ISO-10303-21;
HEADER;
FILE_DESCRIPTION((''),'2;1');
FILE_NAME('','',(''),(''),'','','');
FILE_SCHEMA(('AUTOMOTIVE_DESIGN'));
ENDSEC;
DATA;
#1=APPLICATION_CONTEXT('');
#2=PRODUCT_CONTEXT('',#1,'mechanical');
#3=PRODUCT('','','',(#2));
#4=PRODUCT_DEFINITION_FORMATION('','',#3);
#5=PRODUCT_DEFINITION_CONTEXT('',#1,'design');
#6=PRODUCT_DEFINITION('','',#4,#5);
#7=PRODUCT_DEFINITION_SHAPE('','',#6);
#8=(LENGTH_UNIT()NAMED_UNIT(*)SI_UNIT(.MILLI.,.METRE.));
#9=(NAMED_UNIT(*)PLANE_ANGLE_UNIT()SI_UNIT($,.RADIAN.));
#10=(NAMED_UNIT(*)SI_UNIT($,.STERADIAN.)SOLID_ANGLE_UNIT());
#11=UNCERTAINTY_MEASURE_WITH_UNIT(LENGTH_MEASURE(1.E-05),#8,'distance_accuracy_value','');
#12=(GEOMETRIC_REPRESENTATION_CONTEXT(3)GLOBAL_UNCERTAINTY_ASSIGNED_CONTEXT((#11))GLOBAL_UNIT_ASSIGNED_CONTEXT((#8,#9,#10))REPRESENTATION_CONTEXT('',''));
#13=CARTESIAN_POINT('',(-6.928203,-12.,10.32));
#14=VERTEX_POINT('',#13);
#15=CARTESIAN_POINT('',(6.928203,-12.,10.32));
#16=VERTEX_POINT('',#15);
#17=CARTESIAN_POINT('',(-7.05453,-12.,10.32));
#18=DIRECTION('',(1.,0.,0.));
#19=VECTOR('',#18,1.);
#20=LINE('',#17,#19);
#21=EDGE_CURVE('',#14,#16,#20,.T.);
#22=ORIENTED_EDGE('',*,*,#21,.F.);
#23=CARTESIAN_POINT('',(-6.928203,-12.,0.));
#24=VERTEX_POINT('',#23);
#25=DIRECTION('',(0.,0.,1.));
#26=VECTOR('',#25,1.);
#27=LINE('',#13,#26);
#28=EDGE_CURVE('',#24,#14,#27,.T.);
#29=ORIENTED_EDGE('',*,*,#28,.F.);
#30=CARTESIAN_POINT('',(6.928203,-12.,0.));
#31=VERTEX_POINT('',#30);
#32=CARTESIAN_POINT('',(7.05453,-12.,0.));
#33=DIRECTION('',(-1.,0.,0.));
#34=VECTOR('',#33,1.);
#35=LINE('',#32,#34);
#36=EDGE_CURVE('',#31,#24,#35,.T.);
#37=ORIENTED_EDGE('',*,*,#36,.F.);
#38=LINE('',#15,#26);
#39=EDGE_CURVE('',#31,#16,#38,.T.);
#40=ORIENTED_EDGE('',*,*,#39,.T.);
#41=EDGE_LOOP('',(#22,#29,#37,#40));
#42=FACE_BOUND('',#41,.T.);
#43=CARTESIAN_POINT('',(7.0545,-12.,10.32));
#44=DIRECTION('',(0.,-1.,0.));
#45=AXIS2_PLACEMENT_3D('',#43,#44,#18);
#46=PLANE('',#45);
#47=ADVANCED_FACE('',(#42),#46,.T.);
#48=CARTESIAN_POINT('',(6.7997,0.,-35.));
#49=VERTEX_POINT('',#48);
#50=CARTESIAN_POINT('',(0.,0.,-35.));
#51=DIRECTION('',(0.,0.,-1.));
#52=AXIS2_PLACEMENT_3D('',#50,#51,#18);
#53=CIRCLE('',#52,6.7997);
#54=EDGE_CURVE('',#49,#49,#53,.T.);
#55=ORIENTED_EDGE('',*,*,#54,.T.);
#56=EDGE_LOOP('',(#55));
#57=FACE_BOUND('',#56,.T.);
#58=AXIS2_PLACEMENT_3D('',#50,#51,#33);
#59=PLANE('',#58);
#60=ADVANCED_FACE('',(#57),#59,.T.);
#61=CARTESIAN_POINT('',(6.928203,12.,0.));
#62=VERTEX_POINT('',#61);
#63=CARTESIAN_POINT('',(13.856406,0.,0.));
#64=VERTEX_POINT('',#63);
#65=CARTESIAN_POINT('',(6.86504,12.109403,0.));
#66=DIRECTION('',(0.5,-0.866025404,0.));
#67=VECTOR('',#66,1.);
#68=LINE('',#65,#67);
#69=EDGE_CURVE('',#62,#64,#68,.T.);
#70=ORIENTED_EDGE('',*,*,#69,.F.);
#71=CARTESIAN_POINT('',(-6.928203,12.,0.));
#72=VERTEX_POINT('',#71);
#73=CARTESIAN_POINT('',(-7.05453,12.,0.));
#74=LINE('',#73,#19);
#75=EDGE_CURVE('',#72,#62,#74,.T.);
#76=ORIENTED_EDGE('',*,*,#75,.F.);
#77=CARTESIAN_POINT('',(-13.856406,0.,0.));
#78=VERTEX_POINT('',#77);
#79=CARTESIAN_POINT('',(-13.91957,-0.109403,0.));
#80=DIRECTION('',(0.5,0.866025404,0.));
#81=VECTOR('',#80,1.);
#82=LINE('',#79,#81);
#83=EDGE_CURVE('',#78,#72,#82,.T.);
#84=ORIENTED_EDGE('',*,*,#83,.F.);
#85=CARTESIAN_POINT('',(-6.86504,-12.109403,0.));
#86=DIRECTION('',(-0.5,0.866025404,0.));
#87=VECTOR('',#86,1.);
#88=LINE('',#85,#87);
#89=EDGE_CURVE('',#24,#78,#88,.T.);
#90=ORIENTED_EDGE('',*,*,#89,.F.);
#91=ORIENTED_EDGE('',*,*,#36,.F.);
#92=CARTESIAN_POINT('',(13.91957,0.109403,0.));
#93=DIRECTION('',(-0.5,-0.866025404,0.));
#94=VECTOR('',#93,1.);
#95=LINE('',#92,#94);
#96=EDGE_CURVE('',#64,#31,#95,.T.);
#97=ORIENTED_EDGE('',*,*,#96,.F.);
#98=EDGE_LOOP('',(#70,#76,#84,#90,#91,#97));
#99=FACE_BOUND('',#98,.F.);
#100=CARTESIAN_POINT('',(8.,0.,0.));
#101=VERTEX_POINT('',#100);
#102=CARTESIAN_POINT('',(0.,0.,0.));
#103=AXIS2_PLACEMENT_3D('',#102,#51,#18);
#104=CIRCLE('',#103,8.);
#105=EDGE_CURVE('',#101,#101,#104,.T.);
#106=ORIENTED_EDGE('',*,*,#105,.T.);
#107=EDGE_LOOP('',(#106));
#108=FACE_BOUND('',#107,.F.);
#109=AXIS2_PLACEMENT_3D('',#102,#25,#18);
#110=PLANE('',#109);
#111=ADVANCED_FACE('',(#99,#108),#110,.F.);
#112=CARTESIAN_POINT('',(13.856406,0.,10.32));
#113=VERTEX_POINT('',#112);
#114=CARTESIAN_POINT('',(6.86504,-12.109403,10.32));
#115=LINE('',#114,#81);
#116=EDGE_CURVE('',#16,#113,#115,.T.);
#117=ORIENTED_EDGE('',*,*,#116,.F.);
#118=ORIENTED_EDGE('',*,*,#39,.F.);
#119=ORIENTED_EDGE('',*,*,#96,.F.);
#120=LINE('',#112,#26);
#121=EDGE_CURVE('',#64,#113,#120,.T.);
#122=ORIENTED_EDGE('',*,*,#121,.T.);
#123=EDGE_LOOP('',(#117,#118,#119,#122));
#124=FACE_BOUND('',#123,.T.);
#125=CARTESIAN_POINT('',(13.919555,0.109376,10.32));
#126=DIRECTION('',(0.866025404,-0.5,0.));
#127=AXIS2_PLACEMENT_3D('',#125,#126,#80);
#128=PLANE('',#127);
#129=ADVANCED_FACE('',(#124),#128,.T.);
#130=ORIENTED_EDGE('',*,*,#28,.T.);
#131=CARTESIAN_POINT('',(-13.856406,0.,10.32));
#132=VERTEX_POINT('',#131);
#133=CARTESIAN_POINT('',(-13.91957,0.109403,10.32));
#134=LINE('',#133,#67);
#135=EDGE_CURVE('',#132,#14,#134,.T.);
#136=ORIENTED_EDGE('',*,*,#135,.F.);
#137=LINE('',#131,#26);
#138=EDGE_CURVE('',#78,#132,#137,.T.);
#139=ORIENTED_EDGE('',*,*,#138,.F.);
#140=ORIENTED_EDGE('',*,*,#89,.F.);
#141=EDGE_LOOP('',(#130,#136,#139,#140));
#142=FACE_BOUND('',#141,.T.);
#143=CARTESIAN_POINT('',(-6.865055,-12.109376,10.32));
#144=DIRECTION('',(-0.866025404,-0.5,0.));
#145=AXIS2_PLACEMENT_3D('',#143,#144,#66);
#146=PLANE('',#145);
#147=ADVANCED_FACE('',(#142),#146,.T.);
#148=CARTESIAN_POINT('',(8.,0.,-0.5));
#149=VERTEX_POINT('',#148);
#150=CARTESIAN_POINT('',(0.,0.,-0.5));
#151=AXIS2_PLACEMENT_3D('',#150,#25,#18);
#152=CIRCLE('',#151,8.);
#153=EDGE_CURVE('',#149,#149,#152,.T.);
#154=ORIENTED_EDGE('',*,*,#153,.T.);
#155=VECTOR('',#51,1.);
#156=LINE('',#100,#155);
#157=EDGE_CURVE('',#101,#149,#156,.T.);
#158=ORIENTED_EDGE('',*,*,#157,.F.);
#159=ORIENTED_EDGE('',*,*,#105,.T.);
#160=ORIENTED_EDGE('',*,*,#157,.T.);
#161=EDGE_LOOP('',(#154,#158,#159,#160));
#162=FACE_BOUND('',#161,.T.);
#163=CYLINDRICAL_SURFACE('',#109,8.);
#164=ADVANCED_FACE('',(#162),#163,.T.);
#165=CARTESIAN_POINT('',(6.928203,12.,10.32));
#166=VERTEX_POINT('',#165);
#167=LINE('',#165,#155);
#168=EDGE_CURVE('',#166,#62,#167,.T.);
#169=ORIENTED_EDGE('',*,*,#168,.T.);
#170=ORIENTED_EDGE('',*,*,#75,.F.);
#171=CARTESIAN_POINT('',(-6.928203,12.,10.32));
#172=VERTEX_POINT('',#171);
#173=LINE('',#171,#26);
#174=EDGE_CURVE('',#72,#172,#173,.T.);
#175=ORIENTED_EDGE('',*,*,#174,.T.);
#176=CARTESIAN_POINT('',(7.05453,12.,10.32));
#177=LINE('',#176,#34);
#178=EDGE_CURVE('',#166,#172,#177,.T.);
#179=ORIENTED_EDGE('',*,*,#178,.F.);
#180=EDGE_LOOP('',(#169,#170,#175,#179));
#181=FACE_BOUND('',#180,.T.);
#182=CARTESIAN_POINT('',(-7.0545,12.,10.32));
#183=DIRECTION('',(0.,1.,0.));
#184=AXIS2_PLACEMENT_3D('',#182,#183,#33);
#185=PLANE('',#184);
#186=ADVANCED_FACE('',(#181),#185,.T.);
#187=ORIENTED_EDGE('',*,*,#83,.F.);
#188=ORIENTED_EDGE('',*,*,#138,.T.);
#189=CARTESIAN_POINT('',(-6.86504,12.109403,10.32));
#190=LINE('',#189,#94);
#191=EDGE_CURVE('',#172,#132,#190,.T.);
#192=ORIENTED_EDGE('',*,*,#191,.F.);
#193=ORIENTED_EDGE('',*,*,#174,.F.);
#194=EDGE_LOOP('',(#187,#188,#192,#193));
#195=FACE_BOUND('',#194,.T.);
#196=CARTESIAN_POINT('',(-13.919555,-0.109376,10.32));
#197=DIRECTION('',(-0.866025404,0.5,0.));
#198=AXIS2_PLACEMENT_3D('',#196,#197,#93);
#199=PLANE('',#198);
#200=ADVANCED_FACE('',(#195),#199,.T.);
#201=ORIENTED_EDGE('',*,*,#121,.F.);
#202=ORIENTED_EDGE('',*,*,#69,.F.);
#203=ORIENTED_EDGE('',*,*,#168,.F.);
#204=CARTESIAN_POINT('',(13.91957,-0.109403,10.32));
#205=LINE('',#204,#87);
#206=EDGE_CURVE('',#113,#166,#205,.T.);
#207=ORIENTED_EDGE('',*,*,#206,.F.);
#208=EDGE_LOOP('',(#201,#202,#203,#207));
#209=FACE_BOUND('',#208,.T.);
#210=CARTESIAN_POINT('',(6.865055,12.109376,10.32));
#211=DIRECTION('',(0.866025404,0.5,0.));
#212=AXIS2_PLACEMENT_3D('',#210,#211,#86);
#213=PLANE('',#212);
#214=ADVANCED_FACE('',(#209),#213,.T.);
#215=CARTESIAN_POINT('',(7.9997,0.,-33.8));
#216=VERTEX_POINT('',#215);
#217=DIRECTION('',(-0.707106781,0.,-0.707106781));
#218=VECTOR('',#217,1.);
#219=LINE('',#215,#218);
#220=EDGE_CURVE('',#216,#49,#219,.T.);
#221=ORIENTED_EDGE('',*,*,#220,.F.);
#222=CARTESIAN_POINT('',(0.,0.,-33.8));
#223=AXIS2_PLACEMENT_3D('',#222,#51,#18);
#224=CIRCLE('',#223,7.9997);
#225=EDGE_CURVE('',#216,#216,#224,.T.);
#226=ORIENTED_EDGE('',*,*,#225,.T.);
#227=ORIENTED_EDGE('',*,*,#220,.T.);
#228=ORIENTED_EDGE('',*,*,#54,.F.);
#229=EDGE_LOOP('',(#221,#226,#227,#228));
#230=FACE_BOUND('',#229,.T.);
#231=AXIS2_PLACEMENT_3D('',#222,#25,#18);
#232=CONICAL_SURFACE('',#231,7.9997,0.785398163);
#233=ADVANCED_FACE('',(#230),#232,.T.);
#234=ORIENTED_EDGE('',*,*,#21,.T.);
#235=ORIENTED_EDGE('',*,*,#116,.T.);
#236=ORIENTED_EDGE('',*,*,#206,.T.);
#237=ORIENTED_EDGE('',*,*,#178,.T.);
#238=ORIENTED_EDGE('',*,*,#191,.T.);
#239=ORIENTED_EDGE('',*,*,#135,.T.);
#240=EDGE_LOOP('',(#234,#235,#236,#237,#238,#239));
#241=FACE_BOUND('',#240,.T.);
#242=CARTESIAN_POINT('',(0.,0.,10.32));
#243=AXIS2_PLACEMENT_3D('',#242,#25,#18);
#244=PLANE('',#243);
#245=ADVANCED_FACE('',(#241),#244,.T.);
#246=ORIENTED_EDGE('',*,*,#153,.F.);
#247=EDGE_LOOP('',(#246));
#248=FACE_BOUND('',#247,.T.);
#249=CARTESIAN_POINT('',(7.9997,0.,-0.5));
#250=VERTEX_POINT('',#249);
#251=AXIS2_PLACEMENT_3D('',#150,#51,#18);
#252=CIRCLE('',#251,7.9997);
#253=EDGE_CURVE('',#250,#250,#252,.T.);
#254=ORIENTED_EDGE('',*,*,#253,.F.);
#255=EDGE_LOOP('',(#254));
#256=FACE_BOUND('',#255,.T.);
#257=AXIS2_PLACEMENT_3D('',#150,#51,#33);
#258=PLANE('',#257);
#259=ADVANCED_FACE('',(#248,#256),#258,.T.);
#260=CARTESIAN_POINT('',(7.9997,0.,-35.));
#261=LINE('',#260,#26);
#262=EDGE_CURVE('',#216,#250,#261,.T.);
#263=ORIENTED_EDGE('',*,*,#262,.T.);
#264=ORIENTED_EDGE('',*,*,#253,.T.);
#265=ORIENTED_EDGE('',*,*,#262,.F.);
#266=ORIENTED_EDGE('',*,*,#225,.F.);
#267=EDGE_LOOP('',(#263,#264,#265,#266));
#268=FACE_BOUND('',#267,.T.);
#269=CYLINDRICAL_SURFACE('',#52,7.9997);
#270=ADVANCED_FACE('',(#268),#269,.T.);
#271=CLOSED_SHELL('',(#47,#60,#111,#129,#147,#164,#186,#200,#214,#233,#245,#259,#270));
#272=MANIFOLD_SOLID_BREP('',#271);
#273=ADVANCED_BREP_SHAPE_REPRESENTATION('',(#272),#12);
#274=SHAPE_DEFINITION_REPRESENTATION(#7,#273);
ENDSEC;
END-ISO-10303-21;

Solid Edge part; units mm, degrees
sketch "Sketch1" plane through (0, 0, 0) normal (0, 0, 1) x (1, 0, 0)
  circle A0 centre (0, 0) radius 13.92
  dimension "D1" = 27.84
extrude "Protrusion1" add sketch "Sketch1" along normal blind 10.32
sketch "Sketch2" plane through (0, 0, 0) normal (0, 0, -1) x (1, 0, 0)
  circle A0 centre (0, 0) radius 8
extrude "Protrusion2" add sketch "Sketch2" along normal blind 35
sketch "Sketch3" plane through (0, 0, -35) normal (0, 0, -1) x (1, 0, 0)
  circle A0 centre (0, 0) radius 7.9997
extrude "Cutout1" cut sketch "Sketch3" against normal blind 34.5 flip side to cut
chamfer "Chamfer_1" distance 1.2 angle 45 1 edges at (-7.9997, 0, -35)
sketch "Sketch4" plane through (0, 0, 10.32) normal (0, 0, 1) x (1, 0, 0)
  line L0 (-7.0545, 12) -> (7.0545, 12)
  dimension "D1" = 24
extrude "Cutout2" cut sketch "Sketch4" against normal up to next material side at (0, 12.05, 10.32)
pattern_circular "Pattern1" count 6 over 360 about axis through (0, 0, 10.32) along (0, 0, 1) of "Cutout2"
properties part number "107681"
